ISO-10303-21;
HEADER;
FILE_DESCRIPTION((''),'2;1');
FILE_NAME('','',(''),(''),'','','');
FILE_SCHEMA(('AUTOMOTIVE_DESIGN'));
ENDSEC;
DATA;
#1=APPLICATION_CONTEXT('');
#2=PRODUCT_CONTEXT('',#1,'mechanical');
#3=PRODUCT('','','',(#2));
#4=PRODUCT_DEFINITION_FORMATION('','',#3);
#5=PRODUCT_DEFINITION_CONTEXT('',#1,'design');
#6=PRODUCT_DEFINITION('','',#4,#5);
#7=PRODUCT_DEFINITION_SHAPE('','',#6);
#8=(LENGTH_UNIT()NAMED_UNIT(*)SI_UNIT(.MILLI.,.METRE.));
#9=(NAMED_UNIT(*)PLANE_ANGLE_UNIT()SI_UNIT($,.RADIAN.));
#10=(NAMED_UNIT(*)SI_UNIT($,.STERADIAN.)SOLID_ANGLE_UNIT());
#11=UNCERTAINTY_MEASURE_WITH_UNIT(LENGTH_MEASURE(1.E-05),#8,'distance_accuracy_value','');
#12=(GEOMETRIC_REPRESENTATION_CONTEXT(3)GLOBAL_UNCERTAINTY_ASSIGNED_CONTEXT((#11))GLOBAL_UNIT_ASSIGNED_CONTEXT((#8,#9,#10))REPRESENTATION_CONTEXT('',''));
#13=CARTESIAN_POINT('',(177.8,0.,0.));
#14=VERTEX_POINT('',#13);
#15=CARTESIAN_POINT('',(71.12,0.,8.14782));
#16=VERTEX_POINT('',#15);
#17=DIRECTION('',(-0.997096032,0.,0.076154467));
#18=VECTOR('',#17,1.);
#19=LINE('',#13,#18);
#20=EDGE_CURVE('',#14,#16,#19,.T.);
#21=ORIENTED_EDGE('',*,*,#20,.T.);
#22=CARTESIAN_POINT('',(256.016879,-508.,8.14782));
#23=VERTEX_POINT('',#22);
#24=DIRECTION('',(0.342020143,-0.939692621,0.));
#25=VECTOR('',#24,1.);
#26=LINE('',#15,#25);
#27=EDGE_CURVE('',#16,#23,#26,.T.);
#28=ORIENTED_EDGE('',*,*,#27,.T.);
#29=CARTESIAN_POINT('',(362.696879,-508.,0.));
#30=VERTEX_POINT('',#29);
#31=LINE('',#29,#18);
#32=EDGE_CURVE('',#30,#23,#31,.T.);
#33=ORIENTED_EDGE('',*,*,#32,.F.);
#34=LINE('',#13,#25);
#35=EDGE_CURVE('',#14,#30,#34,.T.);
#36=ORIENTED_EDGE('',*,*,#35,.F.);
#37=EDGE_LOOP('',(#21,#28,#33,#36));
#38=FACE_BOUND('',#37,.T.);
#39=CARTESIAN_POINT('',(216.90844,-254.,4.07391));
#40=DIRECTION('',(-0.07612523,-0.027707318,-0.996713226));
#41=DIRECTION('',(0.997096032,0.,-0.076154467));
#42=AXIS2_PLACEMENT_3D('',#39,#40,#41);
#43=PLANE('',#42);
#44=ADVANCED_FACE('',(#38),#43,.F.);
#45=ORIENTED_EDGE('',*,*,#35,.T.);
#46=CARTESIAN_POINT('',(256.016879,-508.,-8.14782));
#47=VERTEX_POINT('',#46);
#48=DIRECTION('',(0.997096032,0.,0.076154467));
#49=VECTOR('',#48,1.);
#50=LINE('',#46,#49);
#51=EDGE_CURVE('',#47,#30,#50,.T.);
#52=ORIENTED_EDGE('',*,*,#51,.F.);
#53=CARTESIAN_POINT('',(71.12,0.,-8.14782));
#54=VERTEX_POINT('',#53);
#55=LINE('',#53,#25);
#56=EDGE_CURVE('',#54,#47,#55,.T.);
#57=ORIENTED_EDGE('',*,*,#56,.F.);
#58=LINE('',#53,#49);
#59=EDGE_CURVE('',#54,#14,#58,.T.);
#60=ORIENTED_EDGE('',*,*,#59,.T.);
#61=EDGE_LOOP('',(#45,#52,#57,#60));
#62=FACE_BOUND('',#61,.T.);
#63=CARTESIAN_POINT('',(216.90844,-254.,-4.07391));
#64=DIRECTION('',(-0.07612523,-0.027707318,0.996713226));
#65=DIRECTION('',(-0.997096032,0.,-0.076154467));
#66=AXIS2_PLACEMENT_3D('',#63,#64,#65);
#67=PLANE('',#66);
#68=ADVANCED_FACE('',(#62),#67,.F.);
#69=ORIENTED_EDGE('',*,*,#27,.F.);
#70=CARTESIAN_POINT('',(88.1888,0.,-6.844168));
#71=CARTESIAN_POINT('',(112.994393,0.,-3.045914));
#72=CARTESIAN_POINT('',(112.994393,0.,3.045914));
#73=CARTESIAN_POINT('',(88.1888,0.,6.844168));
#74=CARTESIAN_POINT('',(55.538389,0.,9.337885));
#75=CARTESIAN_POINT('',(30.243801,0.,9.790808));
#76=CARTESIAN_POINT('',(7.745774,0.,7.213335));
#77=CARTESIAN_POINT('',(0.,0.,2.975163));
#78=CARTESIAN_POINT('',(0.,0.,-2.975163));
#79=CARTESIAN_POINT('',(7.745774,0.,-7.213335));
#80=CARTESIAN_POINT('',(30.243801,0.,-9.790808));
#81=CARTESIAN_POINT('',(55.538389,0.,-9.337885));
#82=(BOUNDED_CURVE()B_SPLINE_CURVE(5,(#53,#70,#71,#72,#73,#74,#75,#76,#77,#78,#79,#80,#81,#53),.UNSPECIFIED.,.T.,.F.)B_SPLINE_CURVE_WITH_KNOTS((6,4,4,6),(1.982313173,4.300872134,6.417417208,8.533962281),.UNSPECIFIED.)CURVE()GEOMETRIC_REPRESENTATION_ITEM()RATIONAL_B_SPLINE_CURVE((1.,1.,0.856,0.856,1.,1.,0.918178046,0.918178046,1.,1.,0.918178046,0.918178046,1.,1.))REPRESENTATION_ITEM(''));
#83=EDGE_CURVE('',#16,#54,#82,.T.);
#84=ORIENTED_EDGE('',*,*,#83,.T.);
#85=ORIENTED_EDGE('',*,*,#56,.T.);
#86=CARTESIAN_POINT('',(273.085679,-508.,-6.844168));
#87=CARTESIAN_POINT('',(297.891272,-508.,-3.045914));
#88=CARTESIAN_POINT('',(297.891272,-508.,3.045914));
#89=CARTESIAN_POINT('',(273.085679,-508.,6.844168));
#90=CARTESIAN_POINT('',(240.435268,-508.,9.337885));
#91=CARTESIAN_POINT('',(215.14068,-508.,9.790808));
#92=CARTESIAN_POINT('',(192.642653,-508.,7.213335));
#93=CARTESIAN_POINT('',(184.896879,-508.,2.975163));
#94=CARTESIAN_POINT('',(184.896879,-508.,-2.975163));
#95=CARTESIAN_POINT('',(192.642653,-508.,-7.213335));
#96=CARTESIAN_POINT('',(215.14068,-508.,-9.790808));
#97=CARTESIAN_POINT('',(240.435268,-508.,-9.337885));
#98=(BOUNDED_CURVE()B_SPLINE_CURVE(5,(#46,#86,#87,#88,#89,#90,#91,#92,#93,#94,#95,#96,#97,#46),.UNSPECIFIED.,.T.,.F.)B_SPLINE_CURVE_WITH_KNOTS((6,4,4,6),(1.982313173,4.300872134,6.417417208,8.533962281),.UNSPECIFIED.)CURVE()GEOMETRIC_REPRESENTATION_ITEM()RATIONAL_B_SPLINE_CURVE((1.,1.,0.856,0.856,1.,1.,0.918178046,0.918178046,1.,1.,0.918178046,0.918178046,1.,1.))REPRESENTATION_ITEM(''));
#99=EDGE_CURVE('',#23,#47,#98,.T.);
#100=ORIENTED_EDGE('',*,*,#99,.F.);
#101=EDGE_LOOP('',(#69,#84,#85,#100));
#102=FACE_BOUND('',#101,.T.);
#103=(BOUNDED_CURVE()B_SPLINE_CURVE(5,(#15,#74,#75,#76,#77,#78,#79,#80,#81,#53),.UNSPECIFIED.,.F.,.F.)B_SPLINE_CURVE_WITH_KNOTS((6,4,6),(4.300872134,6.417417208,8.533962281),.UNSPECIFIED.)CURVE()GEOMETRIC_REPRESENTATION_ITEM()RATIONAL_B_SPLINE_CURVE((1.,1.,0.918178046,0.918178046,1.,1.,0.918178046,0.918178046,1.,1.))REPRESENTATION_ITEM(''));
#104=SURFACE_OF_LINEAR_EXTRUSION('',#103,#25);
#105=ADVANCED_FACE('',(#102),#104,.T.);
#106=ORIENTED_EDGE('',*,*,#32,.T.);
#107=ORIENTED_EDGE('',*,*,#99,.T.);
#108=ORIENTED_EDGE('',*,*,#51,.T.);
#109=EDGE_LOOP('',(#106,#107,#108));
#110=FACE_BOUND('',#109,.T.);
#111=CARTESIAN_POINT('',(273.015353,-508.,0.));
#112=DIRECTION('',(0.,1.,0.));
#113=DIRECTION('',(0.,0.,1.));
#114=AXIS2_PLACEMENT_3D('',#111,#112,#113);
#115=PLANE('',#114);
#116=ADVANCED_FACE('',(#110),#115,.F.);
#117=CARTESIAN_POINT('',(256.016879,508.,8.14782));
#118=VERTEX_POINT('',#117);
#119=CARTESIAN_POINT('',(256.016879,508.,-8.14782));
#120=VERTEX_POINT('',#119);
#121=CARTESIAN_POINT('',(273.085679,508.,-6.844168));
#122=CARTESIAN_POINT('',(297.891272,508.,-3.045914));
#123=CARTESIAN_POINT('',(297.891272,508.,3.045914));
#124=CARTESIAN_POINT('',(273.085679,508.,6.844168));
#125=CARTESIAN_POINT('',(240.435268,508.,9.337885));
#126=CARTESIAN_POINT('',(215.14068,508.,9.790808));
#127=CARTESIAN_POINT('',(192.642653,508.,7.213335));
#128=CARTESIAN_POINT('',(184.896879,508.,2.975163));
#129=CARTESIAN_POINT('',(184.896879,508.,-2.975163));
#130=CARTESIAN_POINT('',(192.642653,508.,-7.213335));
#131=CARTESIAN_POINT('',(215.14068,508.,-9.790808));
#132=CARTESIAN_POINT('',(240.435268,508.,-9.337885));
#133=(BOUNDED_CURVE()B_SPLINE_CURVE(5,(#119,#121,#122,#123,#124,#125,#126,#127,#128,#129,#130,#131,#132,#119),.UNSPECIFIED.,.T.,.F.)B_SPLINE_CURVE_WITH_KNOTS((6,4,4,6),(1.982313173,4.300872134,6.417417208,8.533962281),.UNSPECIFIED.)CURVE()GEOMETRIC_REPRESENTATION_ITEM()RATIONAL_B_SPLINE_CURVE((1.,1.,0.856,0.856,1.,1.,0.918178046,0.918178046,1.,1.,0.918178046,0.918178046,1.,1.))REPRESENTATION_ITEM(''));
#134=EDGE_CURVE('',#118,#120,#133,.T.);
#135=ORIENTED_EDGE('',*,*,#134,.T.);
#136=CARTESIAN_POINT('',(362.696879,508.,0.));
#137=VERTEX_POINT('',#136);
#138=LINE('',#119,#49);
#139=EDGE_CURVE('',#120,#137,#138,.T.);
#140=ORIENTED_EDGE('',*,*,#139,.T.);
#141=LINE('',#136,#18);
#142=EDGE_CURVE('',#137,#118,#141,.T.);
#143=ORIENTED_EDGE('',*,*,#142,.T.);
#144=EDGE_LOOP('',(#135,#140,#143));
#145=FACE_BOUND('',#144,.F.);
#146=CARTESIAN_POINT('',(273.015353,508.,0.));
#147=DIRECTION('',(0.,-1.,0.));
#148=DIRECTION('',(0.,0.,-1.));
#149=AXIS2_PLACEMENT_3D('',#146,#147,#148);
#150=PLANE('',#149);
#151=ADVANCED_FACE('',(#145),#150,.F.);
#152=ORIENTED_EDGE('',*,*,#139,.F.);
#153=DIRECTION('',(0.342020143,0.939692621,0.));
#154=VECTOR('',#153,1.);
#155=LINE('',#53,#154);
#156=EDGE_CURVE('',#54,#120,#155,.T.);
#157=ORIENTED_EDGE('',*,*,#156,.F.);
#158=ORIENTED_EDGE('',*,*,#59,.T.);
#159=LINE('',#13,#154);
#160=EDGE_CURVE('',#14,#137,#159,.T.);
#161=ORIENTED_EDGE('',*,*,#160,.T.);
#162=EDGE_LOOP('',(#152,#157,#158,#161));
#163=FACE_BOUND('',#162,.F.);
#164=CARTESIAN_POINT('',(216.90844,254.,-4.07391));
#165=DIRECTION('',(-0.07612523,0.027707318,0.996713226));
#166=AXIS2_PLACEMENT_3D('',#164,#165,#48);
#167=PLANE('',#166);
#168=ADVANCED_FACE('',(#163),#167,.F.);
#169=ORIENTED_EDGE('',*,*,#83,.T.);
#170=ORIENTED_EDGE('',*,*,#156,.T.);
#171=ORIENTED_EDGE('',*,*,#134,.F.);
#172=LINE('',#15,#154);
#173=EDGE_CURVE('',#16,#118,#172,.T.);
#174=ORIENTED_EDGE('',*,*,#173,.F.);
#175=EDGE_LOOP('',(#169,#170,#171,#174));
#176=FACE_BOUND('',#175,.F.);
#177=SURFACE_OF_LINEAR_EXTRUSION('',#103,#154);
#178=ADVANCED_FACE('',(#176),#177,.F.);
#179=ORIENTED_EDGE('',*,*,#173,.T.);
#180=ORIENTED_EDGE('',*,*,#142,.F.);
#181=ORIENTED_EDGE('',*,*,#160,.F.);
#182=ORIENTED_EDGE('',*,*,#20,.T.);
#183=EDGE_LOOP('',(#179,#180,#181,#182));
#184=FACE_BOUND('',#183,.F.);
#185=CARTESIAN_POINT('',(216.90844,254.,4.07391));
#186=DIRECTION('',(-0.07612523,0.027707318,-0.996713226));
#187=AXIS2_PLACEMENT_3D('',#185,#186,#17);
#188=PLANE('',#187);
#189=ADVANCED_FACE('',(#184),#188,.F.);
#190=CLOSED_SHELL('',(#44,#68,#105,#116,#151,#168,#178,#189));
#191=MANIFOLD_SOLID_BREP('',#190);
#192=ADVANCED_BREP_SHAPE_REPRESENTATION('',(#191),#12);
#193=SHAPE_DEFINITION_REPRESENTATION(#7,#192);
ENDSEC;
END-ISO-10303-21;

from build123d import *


# Not quite as in the source:
# - a pattern or mirror of a feature is missing from the dataset's text; its kind, count and spacing are read off the source's solid


with BuildPart() as f2:
    # F2: sweep along a path in F1
    with BuildLine(Plane.XY) as f2_path:
        Line((0, 0), (184.8968790072, 508))
    # F0 (on Front) → F2 (sweep)
    with BuildSketch(Plane.XZ):
        with BuildLine():
            add(Edge.make_bspline(
                [(71.12, 8.1478195856), (0, 13.5796993094), (0, 0)],
                knots=[4.3008721343, 4.3008721343, 4.3008721343, 6.2831853072, 6.2831853072, 6.2831853072], degree=2, weights=[1, 0.5477225575, 1]))
            add(Edge.make_bspline(
                [(0, 0), (0, -13.5796993094), (71.12, -8.1478195856)],
                knots=[0, 0, 0, 1.9823131729, 1.9823131729, 1.9823131729], degree=2, weights=[1, 0.5477225575, 1]))
            add(Edge.make_bspline(
                [(71.12, -8.1478195856), (177.8, 0), (71.12, 8.1478195856)],
                knots=[1.9823131729, 1.9823131729, 1.9823131729, 4.3008721343, 4.3008721343, 4.3008721343], degree=2, weights=[1, 0.4, 1]))
        make_face()
        with BuildLine():
            add(Edge.make_bspline(
                [(71.12, -8.1478195856), (177.8, 0), (71.12, 8.1478195856)],
                knots=[1.9823131729, 1.9823131729, 1.9823131729, 4.3008721343, 4.3008721343, 4.3008721343], degree=2, weights=[1, 0.4, 1]))
            Line((71.12, -8.1478195856), (177.8, 0))
            Line((177.8, 0), (71.12, 8.1478195856))
        make_face()
    sweep(path=f2_path.line)

    # F2_copies: F2 across plane


with BuildPart() as f2_1:
    add(f2.part)
    add(f2.part.mirror(Plane(origin=(0, 0, 0), x_dir=(0, 0, -1), z_dir=(0, -1, 0))))


solid = f2_1.part
